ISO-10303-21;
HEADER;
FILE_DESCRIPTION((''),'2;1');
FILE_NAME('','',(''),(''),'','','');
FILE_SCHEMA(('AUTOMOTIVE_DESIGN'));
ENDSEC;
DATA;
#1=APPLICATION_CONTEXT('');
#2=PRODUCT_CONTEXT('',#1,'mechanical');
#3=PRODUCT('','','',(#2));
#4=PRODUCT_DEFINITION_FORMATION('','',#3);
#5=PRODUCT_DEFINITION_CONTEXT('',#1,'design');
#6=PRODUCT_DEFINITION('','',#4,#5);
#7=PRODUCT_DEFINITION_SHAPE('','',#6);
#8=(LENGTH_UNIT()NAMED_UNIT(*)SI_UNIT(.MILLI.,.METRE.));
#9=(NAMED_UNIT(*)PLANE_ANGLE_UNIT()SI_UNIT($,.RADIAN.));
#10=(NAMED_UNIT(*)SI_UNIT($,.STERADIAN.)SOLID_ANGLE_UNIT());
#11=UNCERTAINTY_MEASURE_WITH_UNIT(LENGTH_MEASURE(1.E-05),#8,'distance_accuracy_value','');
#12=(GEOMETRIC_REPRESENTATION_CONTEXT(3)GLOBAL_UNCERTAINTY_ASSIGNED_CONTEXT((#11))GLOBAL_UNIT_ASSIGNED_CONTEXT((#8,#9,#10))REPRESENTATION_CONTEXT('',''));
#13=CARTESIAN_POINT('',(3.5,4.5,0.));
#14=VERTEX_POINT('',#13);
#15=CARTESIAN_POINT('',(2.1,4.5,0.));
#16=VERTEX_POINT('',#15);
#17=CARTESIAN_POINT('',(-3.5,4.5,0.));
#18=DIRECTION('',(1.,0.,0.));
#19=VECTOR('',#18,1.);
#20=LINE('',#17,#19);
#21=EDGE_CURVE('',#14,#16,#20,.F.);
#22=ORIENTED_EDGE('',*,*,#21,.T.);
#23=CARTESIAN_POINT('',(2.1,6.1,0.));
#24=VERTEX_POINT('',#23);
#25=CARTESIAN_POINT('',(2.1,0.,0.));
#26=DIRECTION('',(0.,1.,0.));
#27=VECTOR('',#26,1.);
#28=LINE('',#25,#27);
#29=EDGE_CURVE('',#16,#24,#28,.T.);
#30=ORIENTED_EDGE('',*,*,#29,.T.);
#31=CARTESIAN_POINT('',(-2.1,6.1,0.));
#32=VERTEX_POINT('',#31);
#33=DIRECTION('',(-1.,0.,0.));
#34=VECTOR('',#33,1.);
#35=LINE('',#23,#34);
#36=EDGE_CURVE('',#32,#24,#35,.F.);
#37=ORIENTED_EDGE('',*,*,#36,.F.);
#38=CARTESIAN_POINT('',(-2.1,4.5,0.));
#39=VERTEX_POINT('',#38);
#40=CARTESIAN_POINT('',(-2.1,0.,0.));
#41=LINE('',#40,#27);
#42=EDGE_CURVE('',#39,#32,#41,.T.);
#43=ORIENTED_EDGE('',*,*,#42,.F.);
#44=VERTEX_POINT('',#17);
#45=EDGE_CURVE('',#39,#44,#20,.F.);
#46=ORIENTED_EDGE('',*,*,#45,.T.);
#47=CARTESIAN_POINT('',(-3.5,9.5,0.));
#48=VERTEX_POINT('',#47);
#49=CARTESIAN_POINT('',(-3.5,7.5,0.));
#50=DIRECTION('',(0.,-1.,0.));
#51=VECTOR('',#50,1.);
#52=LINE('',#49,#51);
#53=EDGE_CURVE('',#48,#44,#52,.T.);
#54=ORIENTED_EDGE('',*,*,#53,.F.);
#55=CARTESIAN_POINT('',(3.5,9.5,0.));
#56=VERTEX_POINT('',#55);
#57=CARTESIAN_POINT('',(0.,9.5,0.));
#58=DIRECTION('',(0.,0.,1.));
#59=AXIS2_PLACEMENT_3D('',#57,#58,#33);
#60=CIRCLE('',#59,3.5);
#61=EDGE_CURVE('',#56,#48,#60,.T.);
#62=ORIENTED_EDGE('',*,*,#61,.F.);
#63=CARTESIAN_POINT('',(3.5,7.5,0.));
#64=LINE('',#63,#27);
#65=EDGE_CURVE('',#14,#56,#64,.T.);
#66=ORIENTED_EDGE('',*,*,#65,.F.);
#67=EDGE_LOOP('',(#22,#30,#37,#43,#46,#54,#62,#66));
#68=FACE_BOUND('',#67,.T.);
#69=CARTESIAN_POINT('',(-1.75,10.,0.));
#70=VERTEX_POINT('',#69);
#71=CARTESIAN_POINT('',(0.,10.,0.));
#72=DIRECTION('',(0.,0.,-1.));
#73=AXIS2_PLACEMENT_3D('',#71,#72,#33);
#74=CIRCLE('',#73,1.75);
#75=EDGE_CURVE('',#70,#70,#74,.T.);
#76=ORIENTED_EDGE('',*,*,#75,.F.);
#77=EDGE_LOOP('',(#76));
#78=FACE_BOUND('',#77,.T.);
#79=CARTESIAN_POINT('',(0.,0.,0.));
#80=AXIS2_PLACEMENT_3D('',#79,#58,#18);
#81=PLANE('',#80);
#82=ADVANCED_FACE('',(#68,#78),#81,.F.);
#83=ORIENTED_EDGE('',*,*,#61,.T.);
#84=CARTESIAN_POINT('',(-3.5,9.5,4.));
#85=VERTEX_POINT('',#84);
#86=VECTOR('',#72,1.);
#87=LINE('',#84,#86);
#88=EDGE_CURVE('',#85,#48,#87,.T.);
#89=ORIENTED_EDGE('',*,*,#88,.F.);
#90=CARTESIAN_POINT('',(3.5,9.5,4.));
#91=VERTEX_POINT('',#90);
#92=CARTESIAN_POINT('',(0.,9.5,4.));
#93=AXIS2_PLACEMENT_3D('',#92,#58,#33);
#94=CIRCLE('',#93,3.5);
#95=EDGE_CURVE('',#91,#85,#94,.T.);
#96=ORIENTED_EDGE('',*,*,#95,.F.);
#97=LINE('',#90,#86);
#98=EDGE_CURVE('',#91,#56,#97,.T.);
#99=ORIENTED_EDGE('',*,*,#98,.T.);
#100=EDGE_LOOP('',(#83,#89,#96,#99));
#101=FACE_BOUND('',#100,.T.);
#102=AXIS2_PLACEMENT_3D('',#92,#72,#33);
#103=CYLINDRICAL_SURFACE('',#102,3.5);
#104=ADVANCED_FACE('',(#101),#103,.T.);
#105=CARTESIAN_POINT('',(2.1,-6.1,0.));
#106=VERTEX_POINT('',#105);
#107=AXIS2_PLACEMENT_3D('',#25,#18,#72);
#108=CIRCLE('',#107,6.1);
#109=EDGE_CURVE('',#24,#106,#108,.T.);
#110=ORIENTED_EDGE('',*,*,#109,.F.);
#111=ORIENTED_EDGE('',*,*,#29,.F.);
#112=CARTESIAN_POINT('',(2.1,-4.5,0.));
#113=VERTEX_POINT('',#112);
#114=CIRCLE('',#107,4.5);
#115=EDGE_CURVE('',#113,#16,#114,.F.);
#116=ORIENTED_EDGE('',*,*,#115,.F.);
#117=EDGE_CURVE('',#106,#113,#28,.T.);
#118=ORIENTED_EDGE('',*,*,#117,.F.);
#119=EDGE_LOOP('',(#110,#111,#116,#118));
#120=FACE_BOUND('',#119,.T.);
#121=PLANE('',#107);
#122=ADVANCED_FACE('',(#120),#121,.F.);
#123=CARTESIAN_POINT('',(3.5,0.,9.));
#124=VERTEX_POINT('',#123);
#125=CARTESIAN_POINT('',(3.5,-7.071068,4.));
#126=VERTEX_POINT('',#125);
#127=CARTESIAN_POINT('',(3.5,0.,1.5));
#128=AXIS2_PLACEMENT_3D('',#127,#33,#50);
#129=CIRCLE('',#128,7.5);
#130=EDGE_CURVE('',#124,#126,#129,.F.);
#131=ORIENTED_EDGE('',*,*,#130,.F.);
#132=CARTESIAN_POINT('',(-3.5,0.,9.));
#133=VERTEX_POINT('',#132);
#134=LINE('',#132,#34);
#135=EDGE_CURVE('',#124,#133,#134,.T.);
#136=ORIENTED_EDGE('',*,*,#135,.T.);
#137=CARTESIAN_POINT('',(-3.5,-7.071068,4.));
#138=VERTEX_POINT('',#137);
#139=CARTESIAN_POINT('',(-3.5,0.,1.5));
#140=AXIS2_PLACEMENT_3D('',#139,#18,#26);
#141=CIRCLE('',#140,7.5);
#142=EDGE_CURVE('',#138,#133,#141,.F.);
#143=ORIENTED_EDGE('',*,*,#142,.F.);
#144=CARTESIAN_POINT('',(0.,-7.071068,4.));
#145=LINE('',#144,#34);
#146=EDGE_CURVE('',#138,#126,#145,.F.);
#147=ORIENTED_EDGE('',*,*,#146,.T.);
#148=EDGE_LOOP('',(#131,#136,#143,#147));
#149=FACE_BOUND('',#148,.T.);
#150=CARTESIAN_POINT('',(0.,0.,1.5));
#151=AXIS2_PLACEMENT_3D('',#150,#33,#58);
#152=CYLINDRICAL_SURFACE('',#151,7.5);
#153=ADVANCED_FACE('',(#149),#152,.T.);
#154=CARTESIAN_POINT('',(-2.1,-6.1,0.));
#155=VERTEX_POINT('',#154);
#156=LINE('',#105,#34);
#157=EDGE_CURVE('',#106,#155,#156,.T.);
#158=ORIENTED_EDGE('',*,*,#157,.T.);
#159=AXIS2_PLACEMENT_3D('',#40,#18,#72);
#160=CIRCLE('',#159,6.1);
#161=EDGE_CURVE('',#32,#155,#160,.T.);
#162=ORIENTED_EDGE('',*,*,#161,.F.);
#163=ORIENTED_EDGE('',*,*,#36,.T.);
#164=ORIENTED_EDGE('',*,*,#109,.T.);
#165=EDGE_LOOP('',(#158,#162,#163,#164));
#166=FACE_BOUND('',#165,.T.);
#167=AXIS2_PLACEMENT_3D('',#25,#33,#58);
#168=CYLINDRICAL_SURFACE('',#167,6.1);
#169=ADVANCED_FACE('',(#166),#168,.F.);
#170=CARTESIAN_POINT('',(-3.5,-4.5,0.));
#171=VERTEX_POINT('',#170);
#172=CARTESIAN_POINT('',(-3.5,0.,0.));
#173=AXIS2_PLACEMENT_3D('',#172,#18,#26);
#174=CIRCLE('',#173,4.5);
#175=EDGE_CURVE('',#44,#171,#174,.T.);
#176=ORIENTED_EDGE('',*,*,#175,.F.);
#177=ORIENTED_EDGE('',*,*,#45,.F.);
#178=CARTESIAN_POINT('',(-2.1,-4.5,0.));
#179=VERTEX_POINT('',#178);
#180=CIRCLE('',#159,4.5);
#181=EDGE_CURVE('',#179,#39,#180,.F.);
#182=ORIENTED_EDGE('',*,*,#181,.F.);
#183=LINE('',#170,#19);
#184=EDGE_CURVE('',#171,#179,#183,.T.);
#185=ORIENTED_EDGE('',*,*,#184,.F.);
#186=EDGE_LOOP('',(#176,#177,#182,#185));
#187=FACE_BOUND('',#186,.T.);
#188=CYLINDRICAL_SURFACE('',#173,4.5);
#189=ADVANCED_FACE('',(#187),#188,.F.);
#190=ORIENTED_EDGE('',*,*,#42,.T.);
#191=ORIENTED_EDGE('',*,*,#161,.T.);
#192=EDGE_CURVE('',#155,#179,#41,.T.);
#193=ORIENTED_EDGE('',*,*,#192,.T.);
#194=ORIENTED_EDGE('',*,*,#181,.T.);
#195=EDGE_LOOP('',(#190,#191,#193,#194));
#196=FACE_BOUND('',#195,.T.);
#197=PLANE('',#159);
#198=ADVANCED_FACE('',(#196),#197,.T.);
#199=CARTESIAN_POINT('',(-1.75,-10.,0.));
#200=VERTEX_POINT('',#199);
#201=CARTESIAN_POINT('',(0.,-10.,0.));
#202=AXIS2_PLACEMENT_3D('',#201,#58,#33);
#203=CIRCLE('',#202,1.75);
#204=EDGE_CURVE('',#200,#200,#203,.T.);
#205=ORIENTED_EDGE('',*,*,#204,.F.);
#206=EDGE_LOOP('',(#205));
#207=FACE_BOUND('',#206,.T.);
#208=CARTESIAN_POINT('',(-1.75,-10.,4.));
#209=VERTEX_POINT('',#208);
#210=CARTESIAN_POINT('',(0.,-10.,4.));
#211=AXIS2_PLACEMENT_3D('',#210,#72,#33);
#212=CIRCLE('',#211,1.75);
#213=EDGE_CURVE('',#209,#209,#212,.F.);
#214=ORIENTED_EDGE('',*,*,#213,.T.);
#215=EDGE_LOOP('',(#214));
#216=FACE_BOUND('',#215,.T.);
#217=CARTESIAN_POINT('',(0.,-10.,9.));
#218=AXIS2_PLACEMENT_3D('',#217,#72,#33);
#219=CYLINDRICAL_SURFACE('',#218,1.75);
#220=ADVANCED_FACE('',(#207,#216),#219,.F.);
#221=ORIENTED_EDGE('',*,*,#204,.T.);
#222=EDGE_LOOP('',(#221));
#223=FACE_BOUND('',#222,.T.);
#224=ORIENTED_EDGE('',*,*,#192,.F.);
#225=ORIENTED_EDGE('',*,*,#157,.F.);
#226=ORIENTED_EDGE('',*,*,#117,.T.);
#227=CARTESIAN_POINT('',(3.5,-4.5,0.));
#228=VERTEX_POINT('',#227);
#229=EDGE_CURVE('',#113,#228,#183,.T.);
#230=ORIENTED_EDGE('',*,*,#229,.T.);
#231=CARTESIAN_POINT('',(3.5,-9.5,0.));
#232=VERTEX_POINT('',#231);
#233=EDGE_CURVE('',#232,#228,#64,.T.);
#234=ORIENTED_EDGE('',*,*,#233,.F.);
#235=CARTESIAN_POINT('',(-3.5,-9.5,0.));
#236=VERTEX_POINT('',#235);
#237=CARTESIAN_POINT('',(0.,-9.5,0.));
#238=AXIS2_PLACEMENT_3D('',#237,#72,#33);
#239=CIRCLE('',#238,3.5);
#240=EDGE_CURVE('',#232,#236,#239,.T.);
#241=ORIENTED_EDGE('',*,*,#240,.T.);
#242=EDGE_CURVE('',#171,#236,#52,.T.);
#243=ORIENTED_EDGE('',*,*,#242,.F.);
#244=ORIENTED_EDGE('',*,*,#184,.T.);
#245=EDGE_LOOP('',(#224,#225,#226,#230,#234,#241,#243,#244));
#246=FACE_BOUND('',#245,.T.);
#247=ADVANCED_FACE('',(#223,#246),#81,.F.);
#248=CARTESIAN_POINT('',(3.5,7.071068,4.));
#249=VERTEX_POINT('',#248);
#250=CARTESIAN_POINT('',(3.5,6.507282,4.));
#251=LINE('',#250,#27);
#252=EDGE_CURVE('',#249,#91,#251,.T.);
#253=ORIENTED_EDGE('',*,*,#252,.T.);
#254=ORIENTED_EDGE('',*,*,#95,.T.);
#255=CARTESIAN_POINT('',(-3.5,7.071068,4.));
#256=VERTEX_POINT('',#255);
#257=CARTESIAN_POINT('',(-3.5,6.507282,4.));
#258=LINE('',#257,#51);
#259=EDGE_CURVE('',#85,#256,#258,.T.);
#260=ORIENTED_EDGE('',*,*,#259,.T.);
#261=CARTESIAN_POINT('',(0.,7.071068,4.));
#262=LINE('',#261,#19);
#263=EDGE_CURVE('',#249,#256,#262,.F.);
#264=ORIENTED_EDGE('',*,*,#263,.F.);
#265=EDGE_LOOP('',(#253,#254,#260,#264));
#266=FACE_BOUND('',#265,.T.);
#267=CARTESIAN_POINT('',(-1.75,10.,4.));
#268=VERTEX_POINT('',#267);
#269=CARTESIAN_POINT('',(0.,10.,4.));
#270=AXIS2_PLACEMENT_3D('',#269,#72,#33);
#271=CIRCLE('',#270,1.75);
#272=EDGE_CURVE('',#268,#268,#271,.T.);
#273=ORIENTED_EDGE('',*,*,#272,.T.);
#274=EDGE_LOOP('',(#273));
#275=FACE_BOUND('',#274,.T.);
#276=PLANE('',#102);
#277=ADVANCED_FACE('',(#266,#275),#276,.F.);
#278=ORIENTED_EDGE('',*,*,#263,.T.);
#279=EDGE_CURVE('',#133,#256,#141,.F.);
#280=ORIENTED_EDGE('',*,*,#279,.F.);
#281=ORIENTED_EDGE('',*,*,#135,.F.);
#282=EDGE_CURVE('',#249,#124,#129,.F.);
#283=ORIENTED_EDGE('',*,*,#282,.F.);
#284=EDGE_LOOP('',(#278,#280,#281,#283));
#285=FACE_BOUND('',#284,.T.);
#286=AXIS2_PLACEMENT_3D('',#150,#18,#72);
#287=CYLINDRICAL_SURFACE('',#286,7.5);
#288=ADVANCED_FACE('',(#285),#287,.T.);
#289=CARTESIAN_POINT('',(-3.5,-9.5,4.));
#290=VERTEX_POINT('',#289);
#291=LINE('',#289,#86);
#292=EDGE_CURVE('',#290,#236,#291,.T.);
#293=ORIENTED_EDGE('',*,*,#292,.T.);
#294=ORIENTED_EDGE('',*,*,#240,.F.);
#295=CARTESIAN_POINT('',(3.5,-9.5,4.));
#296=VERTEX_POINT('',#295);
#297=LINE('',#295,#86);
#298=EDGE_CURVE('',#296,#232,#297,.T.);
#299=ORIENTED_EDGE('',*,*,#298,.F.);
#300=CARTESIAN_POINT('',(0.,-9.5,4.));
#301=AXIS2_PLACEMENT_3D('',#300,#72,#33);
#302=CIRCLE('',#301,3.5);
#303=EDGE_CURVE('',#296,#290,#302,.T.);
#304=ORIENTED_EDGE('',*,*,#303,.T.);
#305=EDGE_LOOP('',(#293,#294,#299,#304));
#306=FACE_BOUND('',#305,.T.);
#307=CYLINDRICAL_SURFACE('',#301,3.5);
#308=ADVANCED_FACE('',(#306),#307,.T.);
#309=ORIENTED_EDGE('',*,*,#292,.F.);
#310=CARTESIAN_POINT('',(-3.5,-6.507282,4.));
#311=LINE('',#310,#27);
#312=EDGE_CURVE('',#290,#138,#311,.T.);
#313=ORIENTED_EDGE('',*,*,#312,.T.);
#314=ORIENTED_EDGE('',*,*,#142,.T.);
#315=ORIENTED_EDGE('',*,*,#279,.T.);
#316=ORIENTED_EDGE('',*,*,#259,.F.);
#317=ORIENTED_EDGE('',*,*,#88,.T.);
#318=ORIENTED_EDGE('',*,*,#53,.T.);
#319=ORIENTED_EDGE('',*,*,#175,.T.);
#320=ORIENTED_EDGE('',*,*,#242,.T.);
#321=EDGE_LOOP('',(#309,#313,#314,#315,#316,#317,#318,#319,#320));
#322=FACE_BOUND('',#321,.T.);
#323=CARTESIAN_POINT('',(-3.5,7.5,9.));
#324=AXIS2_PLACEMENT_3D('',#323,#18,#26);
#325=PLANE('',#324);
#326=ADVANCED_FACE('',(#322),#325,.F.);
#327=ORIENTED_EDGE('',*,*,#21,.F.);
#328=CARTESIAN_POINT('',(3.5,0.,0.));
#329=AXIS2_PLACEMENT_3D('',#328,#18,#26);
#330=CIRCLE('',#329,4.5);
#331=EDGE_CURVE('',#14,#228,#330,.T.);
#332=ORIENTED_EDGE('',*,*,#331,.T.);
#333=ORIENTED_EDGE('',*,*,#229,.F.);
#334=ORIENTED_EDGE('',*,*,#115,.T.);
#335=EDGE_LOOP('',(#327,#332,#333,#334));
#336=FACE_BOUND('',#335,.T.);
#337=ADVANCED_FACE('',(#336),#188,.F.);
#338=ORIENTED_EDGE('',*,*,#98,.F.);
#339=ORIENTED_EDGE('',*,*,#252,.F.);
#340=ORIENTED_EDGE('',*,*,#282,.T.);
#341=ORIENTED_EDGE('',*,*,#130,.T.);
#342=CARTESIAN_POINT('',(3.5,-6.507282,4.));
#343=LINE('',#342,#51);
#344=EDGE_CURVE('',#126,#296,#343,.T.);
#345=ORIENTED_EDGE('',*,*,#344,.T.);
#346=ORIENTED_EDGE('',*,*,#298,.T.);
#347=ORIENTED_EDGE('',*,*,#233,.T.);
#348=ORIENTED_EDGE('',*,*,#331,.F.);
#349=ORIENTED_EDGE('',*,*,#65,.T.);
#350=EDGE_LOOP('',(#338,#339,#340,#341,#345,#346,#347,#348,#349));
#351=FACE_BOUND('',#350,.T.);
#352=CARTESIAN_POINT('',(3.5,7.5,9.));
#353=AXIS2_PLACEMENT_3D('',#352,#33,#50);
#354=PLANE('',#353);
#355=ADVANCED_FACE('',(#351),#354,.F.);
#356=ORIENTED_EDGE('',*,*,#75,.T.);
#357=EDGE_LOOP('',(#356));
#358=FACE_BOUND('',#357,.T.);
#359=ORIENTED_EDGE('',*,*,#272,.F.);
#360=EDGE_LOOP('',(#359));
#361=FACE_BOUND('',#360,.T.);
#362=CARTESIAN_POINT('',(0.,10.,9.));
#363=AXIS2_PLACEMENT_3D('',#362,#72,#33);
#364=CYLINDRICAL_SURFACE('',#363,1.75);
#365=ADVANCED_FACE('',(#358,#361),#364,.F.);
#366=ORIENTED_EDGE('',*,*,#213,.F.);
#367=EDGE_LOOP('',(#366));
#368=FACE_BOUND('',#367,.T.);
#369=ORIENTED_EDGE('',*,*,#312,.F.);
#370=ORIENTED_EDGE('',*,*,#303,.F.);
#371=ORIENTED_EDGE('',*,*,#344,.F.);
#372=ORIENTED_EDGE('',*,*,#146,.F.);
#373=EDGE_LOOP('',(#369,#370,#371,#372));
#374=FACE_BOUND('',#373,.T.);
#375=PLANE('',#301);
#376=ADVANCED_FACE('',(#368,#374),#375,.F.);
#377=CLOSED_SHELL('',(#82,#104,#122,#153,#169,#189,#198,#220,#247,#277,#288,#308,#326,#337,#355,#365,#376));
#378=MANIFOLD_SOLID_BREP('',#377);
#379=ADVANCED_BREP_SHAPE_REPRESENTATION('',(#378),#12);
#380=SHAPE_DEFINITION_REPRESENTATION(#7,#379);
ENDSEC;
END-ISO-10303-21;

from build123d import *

# Parameters (mm, degrees)
SKETCH1_W               = 7
SKETCH1_H               = 15
BOSS_EXTRUDE1_DEPTH     = 9
SKETCH2_R               = 4.5
CUT_EXTRUDE1_DEPTH      = 14.647344064
CUT_EXTRUDE2_DEPTH      = 2.1
CUT_EXTRUDE2_DEPTH_BACK = 2.1
SKETCH3_R               = 6.1
FILLET1_R               = 7.5
BOSS_EXTRUDE2_DEPTH     = 4
SKETCH5_R               = 1.75
CUT_EXTRUDE3_DEPTH      = 17.194134741


with BuildPart() as part:
    # Sketch1 → Boss-Extrude1 (new body)
    with BuildSketch(Plane.XY):
        Rectangle(SKETCH1_W, SKETCH1_H)
    extrude(amount=BOSS_EXTRUDE1_DEPTH)

    # Sketch2 → Cut-Extrude1 (cut, through all)
    with BuildSketch(Plane(origin=(3.5, 0, 0), x_dir=(0, 0, -1), z_dir=(1, 0, 0))):
        Circle(SKETCH2_R)
    extrude(amount=-CUT_EXTRUDE1_DEPTH, mode=Mode.SUBTRACT)

    # Sketch3 → Cut-Extrude2 (cut, two sides: drawn at the far end of the back side and taken through both)
    with BuildSketch(Plane(origin=(0, 0, 0), x_dir=(0, 0, -1), z_dir=(1, 0, 0)).offset(-CUT_EXTRUDE2_DEPTH_BACK)):
        Circle(SKETCH3_R)
    extrude(amount=CUT_EXTRUDE2_DEPTH + CUT_EXTRUDE2_DEPTH_BACK, mode=Mode.SUBTRACT)

    # Fillet1
    fillet1_edges = [part.edges().sort_by_distance(p)[0] for p in [
        (0, -7.5, 9),
        (0, 7.5, 9),
    ]]
    fillet(fillet1_edges, radius=FILLET1_R - 0.0001)  # a hair under: the kernel refuses the full size

    # Sketch4 → Boss-Extrude2 (add)
    with BuildSketch(Plane.XY):
        with BuildLine():
            Line((-3.5, 6.507281557), (-3.5, 9.5))
            ThreePointArc((-3.5, 9.5), (0, 13), (3.5, 9.5))
            Line((3.5, 9.5), (3.5, 6.507281557))
            Line((3.5, 6.507281557), (-3.5, 6.507281557))
        make_face()
    boss_extrude2 = extrude(amount=BOSS_EXTRUDE2_DEPTH)

    # Sketch5 → Cut-Extrude3 (cut, through all)
    with BuildSketch(Plane(origin=(0, 0, 0), x_dir=(-1, 0, 0), z_dir=(0, 0, -1))):
        with Locations((0, 10)):
            Circle(SKETCH5_R)
    cut_extrude3 = extrude(amount=-CUT_EXTRUDE3_DEPTH, mode=Mode.SUBTRACT)

    # Mirror1: Boss-Extrude2, Cut-Extrude3 across plane
    add(boss_extrude2.mirror(Plane.ZX))
    add(cut_extrude3.mirror(Plane.ZX), mode=Mode.SUBTRACT)


solid = part.part
